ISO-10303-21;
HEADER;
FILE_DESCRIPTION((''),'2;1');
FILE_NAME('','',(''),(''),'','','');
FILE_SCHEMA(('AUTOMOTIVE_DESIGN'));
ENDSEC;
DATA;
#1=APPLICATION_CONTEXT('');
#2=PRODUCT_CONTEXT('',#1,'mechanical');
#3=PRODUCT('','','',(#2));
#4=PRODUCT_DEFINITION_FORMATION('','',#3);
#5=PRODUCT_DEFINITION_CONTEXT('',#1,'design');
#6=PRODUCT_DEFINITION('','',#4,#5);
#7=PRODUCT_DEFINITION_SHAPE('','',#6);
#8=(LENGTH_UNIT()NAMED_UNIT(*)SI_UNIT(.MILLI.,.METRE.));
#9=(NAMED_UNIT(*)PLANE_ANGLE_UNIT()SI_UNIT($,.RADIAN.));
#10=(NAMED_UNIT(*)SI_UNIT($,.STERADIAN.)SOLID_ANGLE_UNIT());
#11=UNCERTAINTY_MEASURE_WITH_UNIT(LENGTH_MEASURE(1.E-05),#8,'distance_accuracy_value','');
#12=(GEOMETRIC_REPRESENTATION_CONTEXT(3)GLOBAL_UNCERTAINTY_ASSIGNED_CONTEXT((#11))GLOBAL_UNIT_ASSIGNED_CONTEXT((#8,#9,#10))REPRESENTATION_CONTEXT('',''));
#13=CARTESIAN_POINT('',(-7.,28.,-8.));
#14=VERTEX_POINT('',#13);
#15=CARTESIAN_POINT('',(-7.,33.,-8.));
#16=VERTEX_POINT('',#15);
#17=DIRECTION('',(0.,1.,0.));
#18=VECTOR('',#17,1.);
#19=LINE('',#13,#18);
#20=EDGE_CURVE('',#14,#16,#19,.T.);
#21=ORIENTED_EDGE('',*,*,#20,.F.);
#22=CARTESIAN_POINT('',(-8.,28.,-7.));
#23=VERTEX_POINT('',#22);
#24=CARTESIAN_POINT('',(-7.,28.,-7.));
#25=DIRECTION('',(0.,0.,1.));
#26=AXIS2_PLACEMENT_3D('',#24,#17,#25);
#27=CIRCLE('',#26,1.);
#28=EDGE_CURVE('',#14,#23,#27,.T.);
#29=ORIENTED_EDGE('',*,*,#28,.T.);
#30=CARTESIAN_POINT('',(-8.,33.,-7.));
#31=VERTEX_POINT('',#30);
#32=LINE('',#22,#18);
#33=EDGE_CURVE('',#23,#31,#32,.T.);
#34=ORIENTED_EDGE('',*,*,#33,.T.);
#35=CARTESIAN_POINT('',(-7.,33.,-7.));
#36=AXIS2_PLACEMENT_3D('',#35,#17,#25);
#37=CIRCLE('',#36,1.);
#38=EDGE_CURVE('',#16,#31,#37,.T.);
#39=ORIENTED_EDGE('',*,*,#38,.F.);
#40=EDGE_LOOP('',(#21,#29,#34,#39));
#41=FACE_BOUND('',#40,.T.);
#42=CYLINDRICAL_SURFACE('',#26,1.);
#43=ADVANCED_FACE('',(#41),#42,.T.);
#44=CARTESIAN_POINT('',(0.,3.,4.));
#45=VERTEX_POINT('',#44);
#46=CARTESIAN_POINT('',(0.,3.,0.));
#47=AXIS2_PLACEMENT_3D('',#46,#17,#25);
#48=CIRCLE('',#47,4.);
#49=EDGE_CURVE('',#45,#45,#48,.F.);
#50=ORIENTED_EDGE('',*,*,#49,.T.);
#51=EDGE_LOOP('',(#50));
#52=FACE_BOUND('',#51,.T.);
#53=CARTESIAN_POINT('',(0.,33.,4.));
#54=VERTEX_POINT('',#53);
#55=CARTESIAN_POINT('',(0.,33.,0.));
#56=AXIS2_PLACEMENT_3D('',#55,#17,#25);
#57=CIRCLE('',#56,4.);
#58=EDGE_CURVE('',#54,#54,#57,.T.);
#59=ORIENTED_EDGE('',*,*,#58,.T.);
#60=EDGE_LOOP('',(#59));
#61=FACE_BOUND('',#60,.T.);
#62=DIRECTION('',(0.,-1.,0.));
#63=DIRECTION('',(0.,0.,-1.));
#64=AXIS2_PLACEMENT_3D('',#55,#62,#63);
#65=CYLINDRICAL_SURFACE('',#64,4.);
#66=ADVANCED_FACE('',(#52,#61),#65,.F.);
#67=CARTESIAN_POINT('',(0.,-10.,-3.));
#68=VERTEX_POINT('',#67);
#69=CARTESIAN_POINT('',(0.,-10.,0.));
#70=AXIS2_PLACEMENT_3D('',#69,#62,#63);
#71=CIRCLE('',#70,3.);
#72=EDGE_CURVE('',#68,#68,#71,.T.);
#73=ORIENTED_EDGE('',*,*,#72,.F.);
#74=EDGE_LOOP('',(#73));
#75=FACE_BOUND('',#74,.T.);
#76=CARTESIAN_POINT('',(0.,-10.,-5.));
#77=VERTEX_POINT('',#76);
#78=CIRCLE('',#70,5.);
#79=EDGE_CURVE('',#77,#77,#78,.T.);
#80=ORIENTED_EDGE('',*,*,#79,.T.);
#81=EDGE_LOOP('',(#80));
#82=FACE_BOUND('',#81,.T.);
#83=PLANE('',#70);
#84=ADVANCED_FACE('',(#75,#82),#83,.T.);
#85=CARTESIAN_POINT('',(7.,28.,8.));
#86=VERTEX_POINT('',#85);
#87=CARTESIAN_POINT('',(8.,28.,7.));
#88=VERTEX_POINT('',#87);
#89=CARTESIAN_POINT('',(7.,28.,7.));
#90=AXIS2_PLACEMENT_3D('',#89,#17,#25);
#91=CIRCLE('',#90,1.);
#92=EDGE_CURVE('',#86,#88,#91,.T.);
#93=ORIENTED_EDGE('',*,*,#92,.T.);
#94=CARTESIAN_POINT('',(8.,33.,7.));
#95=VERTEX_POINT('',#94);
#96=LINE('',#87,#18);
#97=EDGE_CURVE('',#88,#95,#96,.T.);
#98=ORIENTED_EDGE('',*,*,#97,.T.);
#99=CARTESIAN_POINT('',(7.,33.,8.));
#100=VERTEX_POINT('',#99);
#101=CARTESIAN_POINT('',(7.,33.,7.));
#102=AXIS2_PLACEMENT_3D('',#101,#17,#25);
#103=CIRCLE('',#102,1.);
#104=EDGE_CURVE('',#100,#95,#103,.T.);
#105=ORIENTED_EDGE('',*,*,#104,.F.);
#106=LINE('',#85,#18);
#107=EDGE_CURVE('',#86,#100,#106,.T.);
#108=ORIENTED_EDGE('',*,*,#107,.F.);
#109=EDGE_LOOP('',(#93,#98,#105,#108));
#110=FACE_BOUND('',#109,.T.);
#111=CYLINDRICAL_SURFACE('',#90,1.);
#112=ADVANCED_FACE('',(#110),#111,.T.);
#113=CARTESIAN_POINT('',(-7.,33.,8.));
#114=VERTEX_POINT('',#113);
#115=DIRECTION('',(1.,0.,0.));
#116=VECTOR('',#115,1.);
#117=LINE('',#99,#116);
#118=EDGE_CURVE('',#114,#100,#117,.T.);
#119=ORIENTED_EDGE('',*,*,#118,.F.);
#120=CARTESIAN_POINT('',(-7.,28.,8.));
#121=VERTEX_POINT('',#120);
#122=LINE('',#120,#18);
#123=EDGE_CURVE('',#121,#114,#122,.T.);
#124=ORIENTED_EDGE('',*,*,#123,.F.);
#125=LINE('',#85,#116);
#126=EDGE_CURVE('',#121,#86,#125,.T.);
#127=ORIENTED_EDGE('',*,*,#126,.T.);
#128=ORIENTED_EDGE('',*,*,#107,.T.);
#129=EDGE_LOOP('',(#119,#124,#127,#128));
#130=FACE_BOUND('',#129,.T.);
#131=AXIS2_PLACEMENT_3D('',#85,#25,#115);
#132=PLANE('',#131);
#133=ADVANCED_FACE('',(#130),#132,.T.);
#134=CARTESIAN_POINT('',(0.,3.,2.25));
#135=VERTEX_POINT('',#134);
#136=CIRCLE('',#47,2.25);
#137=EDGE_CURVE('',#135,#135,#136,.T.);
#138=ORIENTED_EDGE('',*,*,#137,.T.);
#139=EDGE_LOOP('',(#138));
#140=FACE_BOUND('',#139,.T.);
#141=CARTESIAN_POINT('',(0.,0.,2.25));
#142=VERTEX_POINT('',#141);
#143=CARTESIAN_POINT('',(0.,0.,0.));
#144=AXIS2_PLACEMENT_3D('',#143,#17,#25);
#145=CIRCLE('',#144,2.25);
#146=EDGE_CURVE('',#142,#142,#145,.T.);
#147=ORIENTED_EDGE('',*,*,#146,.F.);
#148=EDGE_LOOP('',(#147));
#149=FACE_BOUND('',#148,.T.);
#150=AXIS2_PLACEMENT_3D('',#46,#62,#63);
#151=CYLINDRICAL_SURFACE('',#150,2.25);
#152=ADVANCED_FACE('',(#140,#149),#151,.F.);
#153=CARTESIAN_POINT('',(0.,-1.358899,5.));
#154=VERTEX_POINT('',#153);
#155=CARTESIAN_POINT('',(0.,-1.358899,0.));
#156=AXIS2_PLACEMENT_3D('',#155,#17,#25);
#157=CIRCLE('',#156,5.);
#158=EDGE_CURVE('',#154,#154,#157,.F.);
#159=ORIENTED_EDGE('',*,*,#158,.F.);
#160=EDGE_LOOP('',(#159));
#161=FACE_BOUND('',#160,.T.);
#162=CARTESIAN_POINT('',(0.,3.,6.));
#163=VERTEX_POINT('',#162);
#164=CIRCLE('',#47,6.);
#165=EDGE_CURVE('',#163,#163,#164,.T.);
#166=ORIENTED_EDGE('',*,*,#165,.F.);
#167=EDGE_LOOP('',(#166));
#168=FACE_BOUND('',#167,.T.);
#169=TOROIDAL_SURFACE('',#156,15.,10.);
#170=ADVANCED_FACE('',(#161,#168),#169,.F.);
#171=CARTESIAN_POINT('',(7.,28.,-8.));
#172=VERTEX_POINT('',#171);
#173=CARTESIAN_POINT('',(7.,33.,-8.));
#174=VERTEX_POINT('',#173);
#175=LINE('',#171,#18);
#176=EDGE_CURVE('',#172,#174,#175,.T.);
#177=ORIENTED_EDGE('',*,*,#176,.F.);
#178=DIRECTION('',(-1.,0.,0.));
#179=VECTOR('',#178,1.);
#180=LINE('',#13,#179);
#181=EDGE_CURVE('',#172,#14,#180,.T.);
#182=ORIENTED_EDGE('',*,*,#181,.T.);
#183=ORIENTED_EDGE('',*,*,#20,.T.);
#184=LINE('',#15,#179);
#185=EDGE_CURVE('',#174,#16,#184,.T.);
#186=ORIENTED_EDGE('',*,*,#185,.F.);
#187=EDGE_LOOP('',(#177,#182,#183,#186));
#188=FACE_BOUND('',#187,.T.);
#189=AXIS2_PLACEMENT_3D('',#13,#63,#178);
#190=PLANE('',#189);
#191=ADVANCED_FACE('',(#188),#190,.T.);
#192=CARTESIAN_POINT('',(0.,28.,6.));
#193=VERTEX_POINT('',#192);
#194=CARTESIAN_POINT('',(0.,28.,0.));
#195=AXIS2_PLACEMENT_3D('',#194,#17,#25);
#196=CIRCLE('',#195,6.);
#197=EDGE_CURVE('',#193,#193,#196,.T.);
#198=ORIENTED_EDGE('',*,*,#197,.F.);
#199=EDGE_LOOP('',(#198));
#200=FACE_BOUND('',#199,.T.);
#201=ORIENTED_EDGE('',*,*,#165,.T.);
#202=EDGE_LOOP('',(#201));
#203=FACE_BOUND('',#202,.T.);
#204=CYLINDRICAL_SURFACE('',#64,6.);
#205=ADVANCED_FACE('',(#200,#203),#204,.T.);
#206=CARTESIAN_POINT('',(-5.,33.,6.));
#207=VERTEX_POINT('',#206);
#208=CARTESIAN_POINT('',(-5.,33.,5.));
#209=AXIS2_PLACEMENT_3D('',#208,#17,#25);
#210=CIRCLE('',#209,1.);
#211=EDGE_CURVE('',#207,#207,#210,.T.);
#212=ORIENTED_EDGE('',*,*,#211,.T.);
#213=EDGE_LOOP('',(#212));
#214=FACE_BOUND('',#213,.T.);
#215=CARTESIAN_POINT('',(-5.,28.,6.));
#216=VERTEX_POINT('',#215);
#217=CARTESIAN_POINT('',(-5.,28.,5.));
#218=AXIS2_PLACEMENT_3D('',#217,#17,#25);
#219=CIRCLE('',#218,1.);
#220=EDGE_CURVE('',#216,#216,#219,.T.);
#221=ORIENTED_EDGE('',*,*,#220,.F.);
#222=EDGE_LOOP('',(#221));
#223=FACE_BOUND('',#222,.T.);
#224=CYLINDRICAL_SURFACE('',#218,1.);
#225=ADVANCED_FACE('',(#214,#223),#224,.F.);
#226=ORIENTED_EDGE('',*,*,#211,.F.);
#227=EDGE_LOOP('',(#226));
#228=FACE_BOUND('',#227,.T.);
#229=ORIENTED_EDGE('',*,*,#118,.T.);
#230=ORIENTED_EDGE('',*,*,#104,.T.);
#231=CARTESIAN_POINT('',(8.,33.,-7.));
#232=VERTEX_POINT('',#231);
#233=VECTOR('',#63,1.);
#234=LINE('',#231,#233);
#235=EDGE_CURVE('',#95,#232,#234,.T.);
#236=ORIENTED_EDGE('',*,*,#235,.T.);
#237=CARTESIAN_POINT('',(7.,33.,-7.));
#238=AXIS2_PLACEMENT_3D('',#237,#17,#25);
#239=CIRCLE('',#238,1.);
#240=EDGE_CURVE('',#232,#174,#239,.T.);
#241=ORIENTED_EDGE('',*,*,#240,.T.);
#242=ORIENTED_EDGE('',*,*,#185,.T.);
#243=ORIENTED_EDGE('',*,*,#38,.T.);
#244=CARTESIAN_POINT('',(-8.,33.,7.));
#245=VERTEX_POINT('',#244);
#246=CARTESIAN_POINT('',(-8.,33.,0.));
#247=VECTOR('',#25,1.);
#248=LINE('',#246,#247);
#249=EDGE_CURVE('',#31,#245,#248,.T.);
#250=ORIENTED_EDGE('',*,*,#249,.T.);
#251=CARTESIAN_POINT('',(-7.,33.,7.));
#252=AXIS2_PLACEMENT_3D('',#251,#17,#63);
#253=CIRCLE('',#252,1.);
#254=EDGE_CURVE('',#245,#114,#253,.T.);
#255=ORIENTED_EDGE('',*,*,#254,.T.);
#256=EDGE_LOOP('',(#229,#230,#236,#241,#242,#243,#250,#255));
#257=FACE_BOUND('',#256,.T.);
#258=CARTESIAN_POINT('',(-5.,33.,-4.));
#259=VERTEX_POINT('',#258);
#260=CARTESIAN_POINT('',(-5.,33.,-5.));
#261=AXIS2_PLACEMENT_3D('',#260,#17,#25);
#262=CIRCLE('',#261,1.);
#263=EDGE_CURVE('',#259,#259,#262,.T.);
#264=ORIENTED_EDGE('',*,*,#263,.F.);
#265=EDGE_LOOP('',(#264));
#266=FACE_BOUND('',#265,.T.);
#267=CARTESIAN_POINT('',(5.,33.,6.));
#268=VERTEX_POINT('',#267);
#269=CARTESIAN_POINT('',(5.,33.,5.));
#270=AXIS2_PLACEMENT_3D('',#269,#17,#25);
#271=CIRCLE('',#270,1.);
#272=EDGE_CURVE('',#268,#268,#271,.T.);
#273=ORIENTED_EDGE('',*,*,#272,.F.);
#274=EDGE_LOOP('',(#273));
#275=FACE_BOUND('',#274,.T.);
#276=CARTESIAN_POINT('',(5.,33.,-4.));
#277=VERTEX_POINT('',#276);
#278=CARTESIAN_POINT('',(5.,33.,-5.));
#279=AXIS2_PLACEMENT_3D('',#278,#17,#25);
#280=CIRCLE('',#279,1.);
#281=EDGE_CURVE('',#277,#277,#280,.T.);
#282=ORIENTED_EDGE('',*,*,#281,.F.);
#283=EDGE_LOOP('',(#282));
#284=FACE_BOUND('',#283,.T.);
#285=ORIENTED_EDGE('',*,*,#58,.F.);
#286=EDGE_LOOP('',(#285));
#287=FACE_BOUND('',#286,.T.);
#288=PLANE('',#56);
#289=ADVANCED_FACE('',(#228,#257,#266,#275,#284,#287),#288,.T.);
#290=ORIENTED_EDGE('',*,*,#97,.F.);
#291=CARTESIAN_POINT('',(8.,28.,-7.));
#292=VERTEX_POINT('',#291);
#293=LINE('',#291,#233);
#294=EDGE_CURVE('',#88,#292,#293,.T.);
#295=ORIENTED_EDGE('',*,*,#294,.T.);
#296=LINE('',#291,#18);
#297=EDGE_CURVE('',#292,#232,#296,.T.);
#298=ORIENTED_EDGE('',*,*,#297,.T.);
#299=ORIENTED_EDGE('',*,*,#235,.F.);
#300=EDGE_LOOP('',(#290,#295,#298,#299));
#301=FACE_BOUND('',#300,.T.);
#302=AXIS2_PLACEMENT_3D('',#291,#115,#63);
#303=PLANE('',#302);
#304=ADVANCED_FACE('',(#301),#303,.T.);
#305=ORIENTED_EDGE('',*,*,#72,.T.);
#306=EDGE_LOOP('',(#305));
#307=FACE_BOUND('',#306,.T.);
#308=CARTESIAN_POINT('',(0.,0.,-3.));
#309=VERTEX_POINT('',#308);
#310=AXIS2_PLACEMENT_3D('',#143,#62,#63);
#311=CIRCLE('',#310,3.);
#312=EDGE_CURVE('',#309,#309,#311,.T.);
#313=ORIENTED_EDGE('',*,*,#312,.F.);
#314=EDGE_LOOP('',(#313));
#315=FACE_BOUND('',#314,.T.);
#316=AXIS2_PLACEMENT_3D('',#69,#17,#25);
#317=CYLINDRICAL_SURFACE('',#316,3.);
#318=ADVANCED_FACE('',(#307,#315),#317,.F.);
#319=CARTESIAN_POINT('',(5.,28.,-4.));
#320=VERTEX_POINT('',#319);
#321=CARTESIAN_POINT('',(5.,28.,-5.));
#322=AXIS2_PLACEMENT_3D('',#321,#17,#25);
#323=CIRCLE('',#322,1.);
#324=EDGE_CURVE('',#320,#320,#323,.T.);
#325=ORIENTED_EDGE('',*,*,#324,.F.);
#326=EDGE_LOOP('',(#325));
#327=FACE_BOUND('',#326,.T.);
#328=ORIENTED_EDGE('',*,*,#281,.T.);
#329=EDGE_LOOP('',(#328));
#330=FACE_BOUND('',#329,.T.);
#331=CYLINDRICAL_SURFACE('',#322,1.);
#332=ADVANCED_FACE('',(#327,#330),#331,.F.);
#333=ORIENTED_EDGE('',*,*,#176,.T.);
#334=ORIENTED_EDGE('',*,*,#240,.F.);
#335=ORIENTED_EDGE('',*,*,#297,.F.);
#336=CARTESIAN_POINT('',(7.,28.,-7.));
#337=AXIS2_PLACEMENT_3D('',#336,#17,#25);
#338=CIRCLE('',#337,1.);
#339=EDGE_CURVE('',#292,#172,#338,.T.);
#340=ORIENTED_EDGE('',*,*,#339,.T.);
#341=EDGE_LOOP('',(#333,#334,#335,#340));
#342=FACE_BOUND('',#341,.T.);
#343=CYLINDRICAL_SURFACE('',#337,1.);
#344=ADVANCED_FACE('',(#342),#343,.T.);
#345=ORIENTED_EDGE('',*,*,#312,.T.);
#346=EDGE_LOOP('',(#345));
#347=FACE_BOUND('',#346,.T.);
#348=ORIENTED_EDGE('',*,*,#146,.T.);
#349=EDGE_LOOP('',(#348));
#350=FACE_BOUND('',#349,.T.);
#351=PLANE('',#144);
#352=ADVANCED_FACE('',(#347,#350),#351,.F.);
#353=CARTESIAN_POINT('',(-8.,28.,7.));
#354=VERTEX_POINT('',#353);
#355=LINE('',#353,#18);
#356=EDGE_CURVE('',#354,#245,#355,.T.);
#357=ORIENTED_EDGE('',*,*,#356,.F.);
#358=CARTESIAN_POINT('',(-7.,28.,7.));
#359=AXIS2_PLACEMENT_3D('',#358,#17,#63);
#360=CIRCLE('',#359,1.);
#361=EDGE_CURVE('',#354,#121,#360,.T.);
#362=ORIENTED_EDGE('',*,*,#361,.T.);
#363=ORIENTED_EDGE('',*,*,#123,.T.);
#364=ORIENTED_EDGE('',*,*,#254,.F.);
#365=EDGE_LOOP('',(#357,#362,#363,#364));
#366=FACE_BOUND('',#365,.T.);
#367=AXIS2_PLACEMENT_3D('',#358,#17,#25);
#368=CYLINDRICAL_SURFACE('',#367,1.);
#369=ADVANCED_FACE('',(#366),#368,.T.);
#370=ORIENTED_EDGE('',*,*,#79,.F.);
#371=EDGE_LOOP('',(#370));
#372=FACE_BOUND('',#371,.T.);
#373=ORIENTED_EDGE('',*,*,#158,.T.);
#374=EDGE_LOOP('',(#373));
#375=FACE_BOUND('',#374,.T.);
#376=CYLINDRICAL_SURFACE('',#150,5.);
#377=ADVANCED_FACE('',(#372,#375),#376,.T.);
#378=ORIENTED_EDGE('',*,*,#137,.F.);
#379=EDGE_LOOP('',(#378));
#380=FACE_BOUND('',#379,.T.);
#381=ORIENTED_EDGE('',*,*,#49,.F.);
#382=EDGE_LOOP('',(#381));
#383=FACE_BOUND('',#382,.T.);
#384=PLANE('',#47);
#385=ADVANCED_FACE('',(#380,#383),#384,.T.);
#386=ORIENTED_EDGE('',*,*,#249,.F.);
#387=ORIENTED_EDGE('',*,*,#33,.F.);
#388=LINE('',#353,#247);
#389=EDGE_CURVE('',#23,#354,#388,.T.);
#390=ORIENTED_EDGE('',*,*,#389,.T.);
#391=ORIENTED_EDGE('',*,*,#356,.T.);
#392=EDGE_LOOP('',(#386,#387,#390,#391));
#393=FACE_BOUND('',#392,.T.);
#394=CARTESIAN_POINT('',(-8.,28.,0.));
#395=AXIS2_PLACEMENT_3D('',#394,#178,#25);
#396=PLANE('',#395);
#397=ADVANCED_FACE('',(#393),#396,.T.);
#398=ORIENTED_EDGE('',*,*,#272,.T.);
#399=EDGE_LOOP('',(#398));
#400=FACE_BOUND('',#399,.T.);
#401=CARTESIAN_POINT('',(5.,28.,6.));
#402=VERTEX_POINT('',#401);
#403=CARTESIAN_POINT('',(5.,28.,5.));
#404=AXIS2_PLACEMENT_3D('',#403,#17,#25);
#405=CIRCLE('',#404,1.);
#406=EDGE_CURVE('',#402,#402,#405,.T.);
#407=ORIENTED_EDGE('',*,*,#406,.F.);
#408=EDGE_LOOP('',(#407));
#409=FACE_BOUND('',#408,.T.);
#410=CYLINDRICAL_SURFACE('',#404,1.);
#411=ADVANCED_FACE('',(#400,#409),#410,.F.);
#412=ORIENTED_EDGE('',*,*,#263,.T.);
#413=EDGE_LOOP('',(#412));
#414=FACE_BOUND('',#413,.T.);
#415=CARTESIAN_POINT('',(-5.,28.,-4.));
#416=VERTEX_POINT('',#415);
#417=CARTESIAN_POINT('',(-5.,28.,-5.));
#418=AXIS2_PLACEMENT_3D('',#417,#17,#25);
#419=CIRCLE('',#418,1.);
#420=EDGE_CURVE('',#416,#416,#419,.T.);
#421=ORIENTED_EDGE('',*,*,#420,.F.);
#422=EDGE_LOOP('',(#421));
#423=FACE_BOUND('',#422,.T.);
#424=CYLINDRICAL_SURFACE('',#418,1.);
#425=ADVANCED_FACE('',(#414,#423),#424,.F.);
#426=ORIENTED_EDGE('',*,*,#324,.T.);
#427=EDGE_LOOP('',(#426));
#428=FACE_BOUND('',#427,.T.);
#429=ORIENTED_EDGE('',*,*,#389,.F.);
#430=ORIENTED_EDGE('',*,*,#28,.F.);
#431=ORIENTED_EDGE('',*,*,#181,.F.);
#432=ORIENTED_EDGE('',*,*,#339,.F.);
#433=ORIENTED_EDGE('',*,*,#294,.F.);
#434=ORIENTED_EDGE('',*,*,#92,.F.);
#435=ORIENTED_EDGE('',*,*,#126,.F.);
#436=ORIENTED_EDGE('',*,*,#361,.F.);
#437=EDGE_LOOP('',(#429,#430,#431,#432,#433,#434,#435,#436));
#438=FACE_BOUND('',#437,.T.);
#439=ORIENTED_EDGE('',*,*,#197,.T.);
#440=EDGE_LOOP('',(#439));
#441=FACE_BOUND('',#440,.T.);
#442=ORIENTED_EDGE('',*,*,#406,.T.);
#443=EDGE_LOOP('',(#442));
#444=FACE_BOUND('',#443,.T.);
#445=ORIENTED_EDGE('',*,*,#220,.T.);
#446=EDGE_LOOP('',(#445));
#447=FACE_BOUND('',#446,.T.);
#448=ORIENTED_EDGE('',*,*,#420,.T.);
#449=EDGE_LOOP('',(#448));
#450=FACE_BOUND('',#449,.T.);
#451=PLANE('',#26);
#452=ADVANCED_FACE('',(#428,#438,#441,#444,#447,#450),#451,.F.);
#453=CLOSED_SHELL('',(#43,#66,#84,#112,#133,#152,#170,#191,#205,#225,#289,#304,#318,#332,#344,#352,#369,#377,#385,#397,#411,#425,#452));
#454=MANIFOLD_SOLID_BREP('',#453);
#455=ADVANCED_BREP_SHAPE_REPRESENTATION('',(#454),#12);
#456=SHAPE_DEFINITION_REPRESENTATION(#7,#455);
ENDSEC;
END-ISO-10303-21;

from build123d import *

# Parameters (mm, degrees)
SKETCH1_R           = 5
SKETCH1_R_2         = 2.25
BOSS_EXTRUDE1_DEPTH = 3
BOSS_EXTRUDE2_START = 10
SKETCH2_R           = 5
SKETCH2_R_2         = 3
BOSS_EXTRUDE2_DEPTH = 10
SKETCH3_R           = 6
SKETCH3_R_2         = 4
BOSS_EXTRUDE3_DEPTH = 30
FILLET1_R           = 10
BOSS_EXTRUDE4_START = -5
SKETCH4_R           = 4
SKETCH4_R_2         = 1
BOSS_EXTRUDE4_DEPTH = 5


with BuildPart() as part:
    # Sketch1 → Boss-Extrude1 (new body)
    with BuildSketch(Plane(origin=(0, 0, 0), x_dir=(1, 0, 0), z_dir=(0, 1, 0))):
        with Locations(Location((0, 0, 0), (0, 0, 270))):
            Circle(SKETCH1_R)
        with Locations(Location((0, 0, 0), (0, 0, 270))):
            Circle(SKETCH1_R_2, mode=Mode.SUBTRACT)
    extrude(amount=BOSS_EXTRUDE1_DEPTH)

    # Sketch2 → Boss-Extrude2 (add)
    with BuildSketch(Plane.XZ.offset(BOSS_EXTRUDE2_START)):
        with Locations(Location((0, 0, 0), (0, 0, 270))):
            Circle(SKETCH2_R)
        with Locations(Location((0, 0, 0), (0, 0, 270))):
            Circle(SKETCH2_R_2, mode=Mode.SUBTRACT)
    extrude(amount=-BOSS_EXTRUDE2_DEPTH)

    # Sketch3 → Boss-Extrude3 (add)
    with BuildSketch(Plane(origin=(0, 3, 0), x_dir=(1, 0, 0), z_dir=(0, 1, 0))):
        with Locations(Location((0, 0, 0), (0, 0, 270))):
            Circle(SKETCH3_R)
        with Locations(Location((0, 0, 0), (0, 0, 270))):
            Circle(SKETCH3_R_2, mode=Mode.SUBTRACT)
    extrude(amount=BOSS_EXTRUDE3_DEPTH)

    # Fillet1
    # the kernel refuses this fillet: 10 mm, written as the material it adds along each edge
    with BuildSketch(Plane(origin=(0, 3, 0), x_dir=(0, 0, 1), z_dir=(-1, 0, 0))) as fillet1_piece_1:
        with BuildLine():
            CenterArc((15, -4.358898944), FILLET1_R, 154.158067237, 25.841932763)
            Line((6, 0), (5.82, 0.087177979))
            ThreePointArc((5.82, 0.087177979), (5.5, 0.2), (5, 0.2))
            Line((5, 0.2), (4.8, 0))
            Line((4.8, 0), (4.8, -4.358898944))
            Line((4.8, -4.358898944), (5, -4.358898944))
        make_face()
    revolve(axis=Axis((0, 3, 0), (0, 1, 0)))

    # Sketch4 → Boss-Extrude4 (add)
    with BuildSketch(Plane(origin=(0, 33, 0), x_dir=(1, 0, 0), z_dir=(0, 1, 0)).offset(BOSS_EXTRUDE4_START)):
        with BuildLine():
            Line((-8, 0), (-8, 7))
            ThreePointArc((-8, 7), (-7.707106781, 7.707106781), (-7, 8))
            Line((-7, 8), (7, 8))
            ThreePointArc((7, 8), (7.707106781, 7.707106781), (8, 7))
            Line((8, 7), (8, -7))
            ThreePointArc((8, -7), (7.707106781, -7.707106781), (7, -8))
            Line((7, -8), (-7, -8))
            ThreePointArc((-7, -8), (-7.707106781, -7.707106781), (-8, -7))
            Line((-8, -7), (-8, 0))
        make_face()
        with Locations(Location((0, 0, 0), (0, 0, 270))):
            Circle(SKETCH4_R, mode=Mode.SUBTRACT)
        with Locations(Location((-5, 5, 0), (0, 0, 270))):
            Circle(SKETCH4_R_2, mode=Mode.SUBTRACT)
        with Locations(Location((5, 5, 0), (0, 0, 270))):
            Circle(SKETCH4_R_2, mode=Mode.SUBTRACT)
        with Locations(Location((-5, -5, 0), (0, 0, 270))):
            Circle(SKETCH4_R_2, mode=Mode.SUBTRACT)
        with Locations(Location((5, -5, 0), (0, 0, 270))):
            Circle(SKETCH4_R_2, mode=Mode.SUBTRACT)
    extrude(amount=BOSS_EXTRUDE4_DEPTH)


solid = part.part
